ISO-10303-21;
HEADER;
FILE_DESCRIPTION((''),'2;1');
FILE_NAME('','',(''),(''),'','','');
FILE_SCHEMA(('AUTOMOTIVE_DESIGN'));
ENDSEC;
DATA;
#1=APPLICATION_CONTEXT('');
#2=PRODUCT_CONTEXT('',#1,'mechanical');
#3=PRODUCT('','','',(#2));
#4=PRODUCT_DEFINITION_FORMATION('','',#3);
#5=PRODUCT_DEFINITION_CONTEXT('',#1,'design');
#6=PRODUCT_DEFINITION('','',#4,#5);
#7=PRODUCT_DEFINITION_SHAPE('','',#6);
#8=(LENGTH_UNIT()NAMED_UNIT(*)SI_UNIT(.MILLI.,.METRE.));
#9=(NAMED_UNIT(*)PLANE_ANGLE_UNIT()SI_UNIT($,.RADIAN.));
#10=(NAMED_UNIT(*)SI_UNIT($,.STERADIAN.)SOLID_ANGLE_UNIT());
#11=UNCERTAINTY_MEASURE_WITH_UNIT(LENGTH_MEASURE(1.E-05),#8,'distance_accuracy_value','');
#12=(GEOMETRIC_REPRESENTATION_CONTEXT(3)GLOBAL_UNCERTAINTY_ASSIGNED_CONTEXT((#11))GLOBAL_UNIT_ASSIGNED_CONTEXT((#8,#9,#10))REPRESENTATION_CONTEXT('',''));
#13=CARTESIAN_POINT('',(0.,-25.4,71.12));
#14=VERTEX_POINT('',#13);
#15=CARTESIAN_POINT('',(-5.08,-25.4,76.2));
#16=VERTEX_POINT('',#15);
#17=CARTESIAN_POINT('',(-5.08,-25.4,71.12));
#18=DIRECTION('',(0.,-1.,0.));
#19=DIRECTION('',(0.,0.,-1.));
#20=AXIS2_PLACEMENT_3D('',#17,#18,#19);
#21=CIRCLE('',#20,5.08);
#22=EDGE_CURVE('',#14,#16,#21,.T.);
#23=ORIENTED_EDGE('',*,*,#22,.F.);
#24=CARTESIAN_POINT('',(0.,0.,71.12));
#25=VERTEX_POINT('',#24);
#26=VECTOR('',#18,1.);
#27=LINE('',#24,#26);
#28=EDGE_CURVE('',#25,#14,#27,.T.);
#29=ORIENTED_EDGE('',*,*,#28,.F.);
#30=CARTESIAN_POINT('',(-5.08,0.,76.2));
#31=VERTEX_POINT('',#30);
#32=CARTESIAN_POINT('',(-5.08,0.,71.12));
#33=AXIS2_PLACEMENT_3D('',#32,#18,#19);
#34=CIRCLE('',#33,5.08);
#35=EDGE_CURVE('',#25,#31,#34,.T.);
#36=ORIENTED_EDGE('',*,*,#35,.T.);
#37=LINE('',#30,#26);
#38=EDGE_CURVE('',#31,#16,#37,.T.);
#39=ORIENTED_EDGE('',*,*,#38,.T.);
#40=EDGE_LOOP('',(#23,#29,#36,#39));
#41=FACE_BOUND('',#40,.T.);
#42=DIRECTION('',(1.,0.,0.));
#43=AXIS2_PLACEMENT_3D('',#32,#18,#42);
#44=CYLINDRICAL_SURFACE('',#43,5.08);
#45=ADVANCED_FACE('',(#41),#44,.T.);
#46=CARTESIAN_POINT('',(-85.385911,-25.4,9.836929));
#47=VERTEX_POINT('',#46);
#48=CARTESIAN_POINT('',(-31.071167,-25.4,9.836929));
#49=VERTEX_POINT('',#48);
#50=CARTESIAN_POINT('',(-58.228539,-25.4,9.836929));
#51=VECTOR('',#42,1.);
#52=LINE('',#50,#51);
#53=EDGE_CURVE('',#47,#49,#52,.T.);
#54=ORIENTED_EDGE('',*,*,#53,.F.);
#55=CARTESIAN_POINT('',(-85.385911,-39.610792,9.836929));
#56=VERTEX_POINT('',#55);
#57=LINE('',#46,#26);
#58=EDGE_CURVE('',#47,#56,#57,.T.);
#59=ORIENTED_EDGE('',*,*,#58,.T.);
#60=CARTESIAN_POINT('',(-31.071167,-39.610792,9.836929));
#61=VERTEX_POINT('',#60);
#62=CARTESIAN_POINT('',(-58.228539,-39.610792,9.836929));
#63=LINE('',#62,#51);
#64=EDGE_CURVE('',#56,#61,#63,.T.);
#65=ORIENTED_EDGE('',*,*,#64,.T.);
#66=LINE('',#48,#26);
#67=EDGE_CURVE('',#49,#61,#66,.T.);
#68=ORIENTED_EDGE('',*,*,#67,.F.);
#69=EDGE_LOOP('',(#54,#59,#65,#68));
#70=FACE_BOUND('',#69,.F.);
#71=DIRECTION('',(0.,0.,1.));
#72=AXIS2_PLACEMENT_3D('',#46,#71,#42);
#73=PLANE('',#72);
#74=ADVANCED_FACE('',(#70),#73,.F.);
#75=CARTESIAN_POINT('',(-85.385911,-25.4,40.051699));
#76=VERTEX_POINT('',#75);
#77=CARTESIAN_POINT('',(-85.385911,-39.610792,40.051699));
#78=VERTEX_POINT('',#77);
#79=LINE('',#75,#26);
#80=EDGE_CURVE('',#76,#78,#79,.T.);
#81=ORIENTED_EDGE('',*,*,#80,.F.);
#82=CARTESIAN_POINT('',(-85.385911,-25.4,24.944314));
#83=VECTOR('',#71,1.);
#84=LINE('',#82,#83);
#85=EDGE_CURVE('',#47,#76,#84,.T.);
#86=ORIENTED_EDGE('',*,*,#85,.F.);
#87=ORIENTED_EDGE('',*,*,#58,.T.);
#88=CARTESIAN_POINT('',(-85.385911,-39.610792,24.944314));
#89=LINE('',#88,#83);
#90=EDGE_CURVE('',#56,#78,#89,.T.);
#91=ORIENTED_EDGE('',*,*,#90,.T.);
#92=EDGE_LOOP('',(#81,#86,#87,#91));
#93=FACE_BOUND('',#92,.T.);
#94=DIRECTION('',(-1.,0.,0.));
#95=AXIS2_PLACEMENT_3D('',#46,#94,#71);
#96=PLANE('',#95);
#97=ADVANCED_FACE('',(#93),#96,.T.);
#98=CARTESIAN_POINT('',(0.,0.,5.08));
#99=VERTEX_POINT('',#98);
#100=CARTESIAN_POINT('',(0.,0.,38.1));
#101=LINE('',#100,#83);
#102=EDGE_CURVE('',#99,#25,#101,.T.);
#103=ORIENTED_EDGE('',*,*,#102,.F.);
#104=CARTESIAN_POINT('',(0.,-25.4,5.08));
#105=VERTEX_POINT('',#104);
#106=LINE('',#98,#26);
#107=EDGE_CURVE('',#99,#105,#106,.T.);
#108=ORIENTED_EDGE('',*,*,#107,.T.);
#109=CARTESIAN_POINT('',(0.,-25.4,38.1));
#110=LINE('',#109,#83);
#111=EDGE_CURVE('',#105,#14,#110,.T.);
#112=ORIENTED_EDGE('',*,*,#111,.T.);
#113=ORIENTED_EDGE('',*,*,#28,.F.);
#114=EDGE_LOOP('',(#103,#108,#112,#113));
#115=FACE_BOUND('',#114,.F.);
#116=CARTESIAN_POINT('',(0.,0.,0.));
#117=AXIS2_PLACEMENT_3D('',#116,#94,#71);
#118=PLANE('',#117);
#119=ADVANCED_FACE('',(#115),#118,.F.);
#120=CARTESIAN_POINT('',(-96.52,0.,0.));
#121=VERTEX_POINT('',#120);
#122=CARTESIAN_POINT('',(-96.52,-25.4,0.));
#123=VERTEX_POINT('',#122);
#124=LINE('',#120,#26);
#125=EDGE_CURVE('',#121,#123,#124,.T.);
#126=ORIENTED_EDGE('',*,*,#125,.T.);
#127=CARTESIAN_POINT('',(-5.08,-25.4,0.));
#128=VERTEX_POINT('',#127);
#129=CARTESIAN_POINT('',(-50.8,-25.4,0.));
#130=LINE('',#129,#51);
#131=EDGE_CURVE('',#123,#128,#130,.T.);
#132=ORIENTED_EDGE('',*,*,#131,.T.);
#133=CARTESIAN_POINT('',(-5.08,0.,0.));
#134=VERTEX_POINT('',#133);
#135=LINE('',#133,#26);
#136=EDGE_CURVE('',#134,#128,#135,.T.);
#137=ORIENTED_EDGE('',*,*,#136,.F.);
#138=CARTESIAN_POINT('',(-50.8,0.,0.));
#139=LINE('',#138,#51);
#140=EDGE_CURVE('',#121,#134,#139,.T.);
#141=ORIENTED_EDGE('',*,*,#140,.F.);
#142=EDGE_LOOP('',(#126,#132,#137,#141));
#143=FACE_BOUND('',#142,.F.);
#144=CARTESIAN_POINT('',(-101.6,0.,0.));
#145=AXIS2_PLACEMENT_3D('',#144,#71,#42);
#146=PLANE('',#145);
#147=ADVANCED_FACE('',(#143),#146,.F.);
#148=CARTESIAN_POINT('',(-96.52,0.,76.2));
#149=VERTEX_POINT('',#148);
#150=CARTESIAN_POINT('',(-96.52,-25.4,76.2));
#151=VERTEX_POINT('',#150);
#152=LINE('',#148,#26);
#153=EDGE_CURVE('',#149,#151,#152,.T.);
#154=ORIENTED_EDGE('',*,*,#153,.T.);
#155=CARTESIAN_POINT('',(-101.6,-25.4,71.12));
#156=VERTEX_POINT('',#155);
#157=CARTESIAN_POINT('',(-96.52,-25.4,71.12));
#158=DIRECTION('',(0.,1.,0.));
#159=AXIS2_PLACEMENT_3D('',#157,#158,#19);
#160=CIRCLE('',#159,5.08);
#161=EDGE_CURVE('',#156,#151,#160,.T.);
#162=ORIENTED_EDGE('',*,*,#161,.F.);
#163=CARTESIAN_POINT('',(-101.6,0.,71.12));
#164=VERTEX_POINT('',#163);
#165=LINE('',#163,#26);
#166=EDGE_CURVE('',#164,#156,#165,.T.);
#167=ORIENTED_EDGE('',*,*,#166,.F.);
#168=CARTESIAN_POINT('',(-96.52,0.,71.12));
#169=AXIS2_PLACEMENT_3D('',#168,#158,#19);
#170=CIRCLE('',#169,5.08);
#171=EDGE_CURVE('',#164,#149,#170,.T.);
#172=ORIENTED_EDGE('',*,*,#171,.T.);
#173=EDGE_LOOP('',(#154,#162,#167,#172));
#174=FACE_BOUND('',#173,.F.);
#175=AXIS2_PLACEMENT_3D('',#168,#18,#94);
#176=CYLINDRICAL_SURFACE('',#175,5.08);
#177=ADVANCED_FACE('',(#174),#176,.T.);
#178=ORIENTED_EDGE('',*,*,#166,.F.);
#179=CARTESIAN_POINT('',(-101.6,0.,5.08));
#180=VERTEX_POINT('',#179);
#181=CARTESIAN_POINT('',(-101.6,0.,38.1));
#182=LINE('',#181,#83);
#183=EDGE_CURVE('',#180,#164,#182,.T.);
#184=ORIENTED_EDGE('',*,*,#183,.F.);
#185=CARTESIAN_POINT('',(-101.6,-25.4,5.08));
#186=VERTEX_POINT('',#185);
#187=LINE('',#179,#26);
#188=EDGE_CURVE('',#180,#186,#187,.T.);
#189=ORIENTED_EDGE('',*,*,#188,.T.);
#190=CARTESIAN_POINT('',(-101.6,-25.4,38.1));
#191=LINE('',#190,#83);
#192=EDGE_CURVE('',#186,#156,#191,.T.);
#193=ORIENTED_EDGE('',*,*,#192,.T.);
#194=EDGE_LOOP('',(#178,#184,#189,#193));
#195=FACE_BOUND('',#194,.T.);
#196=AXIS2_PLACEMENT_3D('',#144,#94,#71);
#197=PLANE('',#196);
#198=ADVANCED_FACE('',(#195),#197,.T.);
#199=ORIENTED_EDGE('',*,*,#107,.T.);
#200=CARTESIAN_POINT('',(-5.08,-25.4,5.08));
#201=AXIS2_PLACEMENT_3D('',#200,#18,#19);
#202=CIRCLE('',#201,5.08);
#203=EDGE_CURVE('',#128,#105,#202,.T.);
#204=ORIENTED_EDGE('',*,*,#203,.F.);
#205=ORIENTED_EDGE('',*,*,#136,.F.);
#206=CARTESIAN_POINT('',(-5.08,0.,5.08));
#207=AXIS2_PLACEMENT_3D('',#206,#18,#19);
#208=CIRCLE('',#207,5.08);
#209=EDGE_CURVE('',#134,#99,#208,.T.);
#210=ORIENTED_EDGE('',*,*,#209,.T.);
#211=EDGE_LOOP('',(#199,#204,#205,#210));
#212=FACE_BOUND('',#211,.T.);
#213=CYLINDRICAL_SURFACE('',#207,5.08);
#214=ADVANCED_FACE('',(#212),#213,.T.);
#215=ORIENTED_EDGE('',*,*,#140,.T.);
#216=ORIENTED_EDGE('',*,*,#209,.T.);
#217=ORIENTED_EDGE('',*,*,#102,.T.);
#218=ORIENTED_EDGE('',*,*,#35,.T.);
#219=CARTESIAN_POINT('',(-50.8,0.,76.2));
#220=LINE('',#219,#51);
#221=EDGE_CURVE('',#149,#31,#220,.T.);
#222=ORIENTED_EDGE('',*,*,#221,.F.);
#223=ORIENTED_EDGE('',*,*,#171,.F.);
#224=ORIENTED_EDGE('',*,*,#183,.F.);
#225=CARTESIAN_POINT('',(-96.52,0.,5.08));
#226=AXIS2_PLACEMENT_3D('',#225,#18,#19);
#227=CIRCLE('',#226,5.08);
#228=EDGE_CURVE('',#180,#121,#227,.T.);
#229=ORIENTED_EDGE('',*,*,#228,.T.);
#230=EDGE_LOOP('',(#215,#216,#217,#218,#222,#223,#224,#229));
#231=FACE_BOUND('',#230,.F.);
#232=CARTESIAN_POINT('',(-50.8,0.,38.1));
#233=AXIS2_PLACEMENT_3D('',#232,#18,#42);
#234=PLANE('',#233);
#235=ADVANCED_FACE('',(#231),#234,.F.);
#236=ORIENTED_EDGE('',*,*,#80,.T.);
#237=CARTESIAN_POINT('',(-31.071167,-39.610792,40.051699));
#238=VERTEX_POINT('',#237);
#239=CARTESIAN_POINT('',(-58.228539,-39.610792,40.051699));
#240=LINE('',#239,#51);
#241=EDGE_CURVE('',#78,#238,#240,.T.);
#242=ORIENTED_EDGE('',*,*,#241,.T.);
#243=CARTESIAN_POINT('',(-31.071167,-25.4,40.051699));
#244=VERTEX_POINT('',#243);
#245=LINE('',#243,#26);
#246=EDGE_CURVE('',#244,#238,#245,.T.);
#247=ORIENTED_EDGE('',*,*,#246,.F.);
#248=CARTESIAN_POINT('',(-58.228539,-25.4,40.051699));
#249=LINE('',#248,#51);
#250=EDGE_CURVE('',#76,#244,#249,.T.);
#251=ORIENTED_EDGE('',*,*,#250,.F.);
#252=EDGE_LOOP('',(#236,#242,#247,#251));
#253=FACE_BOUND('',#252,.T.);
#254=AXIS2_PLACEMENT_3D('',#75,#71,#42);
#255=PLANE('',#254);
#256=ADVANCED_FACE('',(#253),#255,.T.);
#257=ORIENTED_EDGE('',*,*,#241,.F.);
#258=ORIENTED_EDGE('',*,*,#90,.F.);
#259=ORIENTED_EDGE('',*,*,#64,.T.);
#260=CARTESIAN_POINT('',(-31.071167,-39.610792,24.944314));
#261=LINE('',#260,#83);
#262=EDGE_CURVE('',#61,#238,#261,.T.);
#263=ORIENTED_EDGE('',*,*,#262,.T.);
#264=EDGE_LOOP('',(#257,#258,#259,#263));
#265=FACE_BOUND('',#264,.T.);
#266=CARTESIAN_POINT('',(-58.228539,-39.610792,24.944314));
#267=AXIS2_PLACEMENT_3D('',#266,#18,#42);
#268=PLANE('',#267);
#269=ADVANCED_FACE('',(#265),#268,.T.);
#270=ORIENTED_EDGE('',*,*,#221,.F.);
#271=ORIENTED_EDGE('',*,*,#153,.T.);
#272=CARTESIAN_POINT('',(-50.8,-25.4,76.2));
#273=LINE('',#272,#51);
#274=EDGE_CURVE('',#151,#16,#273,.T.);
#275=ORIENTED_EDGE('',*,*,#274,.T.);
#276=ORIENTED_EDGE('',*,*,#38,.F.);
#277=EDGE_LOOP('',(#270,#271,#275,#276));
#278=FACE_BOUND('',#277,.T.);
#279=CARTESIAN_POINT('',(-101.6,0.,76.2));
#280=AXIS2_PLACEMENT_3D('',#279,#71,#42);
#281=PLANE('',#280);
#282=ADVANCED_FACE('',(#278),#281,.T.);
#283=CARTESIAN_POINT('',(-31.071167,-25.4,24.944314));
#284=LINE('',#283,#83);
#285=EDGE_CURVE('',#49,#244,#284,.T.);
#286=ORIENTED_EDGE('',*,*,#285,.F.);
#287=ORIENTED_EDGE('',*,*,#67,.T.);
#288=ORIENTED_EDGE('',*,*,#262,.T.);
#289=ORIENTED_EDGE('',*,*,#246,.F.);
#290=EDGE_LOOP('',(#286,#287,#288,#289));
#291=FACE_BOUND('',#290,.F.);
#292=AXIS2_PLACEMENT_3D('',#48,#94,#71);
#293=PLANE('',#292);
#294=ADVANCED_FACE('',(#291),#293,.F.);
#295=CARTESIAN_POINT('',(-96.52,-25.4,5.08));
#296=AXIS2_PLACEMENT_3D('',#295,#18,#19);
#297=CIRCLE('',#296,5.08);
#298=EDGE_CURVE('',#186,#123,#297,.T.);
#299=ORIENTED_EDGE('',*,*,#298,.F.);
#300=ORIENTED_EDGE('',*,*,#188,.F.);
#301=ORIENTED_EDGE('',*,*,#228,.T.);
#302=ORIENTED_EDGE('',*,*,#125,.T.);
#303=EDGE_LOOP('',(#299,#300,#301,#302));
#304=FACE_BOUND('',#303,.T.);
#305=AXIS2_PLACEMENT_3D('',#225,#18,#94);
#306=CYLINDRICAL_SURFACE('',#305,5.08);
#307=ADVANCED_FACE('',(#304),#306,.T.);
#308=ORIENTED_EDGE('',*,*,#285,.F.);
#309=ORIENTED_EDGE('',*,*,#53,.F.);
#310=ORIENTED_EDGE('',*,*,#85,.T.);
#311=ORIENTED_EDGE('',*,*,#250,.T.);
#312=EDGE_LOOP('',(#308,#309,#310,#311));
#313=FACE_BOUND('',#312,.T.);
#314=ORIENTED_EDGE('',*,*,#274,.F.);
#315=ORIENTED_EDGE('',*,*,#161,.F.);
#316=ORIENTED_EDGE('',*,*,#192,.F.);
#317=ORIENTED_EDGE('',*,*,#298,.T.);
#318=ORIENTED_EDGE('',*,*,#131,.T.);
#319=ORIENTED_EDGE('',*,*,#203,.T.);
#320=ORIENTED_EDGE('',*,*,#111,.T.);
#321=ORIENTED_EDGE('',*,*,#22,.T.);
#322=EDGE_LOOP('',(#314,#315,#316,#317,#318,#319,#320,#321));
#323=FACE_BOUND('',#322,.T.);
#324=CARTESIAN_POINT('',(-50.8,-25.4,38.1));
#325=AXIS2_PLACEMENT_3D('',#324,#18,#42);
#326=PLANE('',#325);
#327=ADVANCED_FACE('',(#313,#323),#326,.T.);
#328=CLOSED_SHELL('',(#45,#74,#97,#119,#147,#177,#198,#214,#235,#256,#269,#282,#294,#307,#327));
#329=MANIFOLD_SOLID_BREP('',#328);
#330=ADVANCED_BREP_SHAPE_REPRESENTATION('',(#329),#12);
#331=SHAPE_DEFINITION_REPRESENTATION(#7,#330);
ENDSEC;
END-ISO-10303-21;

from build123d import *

# Parameters (mm, degrees)
F0_W     = 101.6
F0_H     = 76.2
F1_DEPTH = 25.4
F4_R     = 5.08
F5_W     = 54.3147437274
F5_H     = 30.2147697657
F6_DEPTH = 14.2107922584


# Not quite as in the source:
# - the program builds the solid bodies; features that only make, move or delete a surface that nothing else refers to are left out


with BuildPart() as f1:
    # F0 (on Front) → F1 (new body)
    with BuildSketch(Plane.XZ):
        with Locations((-50.8, 38.1)):
            Rectangle(F0_W, F0_H)
    extrude(amount=F1_DEPTH)

    # F4
    f4_edges = [f1.edges().sort_by_distance(p)[0] for p in [
        (-101.6, -12.7, 76.2),
        (0, -12.7, 76.2),
        (0, -12.7, 0),
        (-101.6, -12.7, 0),
    ]]
    fillet(f4_edges, radius=F4_R)

    # F5 (on face) → F6 (join)
    with BuildSketch(Plane.XZ.offset(25.4)):
        with Locations((-58.2285393029, 24.9443138018)):
            Rectangle(F5_W, F5_H)
    extrude(amount=F6_DEPTH)


solid = f1.part
